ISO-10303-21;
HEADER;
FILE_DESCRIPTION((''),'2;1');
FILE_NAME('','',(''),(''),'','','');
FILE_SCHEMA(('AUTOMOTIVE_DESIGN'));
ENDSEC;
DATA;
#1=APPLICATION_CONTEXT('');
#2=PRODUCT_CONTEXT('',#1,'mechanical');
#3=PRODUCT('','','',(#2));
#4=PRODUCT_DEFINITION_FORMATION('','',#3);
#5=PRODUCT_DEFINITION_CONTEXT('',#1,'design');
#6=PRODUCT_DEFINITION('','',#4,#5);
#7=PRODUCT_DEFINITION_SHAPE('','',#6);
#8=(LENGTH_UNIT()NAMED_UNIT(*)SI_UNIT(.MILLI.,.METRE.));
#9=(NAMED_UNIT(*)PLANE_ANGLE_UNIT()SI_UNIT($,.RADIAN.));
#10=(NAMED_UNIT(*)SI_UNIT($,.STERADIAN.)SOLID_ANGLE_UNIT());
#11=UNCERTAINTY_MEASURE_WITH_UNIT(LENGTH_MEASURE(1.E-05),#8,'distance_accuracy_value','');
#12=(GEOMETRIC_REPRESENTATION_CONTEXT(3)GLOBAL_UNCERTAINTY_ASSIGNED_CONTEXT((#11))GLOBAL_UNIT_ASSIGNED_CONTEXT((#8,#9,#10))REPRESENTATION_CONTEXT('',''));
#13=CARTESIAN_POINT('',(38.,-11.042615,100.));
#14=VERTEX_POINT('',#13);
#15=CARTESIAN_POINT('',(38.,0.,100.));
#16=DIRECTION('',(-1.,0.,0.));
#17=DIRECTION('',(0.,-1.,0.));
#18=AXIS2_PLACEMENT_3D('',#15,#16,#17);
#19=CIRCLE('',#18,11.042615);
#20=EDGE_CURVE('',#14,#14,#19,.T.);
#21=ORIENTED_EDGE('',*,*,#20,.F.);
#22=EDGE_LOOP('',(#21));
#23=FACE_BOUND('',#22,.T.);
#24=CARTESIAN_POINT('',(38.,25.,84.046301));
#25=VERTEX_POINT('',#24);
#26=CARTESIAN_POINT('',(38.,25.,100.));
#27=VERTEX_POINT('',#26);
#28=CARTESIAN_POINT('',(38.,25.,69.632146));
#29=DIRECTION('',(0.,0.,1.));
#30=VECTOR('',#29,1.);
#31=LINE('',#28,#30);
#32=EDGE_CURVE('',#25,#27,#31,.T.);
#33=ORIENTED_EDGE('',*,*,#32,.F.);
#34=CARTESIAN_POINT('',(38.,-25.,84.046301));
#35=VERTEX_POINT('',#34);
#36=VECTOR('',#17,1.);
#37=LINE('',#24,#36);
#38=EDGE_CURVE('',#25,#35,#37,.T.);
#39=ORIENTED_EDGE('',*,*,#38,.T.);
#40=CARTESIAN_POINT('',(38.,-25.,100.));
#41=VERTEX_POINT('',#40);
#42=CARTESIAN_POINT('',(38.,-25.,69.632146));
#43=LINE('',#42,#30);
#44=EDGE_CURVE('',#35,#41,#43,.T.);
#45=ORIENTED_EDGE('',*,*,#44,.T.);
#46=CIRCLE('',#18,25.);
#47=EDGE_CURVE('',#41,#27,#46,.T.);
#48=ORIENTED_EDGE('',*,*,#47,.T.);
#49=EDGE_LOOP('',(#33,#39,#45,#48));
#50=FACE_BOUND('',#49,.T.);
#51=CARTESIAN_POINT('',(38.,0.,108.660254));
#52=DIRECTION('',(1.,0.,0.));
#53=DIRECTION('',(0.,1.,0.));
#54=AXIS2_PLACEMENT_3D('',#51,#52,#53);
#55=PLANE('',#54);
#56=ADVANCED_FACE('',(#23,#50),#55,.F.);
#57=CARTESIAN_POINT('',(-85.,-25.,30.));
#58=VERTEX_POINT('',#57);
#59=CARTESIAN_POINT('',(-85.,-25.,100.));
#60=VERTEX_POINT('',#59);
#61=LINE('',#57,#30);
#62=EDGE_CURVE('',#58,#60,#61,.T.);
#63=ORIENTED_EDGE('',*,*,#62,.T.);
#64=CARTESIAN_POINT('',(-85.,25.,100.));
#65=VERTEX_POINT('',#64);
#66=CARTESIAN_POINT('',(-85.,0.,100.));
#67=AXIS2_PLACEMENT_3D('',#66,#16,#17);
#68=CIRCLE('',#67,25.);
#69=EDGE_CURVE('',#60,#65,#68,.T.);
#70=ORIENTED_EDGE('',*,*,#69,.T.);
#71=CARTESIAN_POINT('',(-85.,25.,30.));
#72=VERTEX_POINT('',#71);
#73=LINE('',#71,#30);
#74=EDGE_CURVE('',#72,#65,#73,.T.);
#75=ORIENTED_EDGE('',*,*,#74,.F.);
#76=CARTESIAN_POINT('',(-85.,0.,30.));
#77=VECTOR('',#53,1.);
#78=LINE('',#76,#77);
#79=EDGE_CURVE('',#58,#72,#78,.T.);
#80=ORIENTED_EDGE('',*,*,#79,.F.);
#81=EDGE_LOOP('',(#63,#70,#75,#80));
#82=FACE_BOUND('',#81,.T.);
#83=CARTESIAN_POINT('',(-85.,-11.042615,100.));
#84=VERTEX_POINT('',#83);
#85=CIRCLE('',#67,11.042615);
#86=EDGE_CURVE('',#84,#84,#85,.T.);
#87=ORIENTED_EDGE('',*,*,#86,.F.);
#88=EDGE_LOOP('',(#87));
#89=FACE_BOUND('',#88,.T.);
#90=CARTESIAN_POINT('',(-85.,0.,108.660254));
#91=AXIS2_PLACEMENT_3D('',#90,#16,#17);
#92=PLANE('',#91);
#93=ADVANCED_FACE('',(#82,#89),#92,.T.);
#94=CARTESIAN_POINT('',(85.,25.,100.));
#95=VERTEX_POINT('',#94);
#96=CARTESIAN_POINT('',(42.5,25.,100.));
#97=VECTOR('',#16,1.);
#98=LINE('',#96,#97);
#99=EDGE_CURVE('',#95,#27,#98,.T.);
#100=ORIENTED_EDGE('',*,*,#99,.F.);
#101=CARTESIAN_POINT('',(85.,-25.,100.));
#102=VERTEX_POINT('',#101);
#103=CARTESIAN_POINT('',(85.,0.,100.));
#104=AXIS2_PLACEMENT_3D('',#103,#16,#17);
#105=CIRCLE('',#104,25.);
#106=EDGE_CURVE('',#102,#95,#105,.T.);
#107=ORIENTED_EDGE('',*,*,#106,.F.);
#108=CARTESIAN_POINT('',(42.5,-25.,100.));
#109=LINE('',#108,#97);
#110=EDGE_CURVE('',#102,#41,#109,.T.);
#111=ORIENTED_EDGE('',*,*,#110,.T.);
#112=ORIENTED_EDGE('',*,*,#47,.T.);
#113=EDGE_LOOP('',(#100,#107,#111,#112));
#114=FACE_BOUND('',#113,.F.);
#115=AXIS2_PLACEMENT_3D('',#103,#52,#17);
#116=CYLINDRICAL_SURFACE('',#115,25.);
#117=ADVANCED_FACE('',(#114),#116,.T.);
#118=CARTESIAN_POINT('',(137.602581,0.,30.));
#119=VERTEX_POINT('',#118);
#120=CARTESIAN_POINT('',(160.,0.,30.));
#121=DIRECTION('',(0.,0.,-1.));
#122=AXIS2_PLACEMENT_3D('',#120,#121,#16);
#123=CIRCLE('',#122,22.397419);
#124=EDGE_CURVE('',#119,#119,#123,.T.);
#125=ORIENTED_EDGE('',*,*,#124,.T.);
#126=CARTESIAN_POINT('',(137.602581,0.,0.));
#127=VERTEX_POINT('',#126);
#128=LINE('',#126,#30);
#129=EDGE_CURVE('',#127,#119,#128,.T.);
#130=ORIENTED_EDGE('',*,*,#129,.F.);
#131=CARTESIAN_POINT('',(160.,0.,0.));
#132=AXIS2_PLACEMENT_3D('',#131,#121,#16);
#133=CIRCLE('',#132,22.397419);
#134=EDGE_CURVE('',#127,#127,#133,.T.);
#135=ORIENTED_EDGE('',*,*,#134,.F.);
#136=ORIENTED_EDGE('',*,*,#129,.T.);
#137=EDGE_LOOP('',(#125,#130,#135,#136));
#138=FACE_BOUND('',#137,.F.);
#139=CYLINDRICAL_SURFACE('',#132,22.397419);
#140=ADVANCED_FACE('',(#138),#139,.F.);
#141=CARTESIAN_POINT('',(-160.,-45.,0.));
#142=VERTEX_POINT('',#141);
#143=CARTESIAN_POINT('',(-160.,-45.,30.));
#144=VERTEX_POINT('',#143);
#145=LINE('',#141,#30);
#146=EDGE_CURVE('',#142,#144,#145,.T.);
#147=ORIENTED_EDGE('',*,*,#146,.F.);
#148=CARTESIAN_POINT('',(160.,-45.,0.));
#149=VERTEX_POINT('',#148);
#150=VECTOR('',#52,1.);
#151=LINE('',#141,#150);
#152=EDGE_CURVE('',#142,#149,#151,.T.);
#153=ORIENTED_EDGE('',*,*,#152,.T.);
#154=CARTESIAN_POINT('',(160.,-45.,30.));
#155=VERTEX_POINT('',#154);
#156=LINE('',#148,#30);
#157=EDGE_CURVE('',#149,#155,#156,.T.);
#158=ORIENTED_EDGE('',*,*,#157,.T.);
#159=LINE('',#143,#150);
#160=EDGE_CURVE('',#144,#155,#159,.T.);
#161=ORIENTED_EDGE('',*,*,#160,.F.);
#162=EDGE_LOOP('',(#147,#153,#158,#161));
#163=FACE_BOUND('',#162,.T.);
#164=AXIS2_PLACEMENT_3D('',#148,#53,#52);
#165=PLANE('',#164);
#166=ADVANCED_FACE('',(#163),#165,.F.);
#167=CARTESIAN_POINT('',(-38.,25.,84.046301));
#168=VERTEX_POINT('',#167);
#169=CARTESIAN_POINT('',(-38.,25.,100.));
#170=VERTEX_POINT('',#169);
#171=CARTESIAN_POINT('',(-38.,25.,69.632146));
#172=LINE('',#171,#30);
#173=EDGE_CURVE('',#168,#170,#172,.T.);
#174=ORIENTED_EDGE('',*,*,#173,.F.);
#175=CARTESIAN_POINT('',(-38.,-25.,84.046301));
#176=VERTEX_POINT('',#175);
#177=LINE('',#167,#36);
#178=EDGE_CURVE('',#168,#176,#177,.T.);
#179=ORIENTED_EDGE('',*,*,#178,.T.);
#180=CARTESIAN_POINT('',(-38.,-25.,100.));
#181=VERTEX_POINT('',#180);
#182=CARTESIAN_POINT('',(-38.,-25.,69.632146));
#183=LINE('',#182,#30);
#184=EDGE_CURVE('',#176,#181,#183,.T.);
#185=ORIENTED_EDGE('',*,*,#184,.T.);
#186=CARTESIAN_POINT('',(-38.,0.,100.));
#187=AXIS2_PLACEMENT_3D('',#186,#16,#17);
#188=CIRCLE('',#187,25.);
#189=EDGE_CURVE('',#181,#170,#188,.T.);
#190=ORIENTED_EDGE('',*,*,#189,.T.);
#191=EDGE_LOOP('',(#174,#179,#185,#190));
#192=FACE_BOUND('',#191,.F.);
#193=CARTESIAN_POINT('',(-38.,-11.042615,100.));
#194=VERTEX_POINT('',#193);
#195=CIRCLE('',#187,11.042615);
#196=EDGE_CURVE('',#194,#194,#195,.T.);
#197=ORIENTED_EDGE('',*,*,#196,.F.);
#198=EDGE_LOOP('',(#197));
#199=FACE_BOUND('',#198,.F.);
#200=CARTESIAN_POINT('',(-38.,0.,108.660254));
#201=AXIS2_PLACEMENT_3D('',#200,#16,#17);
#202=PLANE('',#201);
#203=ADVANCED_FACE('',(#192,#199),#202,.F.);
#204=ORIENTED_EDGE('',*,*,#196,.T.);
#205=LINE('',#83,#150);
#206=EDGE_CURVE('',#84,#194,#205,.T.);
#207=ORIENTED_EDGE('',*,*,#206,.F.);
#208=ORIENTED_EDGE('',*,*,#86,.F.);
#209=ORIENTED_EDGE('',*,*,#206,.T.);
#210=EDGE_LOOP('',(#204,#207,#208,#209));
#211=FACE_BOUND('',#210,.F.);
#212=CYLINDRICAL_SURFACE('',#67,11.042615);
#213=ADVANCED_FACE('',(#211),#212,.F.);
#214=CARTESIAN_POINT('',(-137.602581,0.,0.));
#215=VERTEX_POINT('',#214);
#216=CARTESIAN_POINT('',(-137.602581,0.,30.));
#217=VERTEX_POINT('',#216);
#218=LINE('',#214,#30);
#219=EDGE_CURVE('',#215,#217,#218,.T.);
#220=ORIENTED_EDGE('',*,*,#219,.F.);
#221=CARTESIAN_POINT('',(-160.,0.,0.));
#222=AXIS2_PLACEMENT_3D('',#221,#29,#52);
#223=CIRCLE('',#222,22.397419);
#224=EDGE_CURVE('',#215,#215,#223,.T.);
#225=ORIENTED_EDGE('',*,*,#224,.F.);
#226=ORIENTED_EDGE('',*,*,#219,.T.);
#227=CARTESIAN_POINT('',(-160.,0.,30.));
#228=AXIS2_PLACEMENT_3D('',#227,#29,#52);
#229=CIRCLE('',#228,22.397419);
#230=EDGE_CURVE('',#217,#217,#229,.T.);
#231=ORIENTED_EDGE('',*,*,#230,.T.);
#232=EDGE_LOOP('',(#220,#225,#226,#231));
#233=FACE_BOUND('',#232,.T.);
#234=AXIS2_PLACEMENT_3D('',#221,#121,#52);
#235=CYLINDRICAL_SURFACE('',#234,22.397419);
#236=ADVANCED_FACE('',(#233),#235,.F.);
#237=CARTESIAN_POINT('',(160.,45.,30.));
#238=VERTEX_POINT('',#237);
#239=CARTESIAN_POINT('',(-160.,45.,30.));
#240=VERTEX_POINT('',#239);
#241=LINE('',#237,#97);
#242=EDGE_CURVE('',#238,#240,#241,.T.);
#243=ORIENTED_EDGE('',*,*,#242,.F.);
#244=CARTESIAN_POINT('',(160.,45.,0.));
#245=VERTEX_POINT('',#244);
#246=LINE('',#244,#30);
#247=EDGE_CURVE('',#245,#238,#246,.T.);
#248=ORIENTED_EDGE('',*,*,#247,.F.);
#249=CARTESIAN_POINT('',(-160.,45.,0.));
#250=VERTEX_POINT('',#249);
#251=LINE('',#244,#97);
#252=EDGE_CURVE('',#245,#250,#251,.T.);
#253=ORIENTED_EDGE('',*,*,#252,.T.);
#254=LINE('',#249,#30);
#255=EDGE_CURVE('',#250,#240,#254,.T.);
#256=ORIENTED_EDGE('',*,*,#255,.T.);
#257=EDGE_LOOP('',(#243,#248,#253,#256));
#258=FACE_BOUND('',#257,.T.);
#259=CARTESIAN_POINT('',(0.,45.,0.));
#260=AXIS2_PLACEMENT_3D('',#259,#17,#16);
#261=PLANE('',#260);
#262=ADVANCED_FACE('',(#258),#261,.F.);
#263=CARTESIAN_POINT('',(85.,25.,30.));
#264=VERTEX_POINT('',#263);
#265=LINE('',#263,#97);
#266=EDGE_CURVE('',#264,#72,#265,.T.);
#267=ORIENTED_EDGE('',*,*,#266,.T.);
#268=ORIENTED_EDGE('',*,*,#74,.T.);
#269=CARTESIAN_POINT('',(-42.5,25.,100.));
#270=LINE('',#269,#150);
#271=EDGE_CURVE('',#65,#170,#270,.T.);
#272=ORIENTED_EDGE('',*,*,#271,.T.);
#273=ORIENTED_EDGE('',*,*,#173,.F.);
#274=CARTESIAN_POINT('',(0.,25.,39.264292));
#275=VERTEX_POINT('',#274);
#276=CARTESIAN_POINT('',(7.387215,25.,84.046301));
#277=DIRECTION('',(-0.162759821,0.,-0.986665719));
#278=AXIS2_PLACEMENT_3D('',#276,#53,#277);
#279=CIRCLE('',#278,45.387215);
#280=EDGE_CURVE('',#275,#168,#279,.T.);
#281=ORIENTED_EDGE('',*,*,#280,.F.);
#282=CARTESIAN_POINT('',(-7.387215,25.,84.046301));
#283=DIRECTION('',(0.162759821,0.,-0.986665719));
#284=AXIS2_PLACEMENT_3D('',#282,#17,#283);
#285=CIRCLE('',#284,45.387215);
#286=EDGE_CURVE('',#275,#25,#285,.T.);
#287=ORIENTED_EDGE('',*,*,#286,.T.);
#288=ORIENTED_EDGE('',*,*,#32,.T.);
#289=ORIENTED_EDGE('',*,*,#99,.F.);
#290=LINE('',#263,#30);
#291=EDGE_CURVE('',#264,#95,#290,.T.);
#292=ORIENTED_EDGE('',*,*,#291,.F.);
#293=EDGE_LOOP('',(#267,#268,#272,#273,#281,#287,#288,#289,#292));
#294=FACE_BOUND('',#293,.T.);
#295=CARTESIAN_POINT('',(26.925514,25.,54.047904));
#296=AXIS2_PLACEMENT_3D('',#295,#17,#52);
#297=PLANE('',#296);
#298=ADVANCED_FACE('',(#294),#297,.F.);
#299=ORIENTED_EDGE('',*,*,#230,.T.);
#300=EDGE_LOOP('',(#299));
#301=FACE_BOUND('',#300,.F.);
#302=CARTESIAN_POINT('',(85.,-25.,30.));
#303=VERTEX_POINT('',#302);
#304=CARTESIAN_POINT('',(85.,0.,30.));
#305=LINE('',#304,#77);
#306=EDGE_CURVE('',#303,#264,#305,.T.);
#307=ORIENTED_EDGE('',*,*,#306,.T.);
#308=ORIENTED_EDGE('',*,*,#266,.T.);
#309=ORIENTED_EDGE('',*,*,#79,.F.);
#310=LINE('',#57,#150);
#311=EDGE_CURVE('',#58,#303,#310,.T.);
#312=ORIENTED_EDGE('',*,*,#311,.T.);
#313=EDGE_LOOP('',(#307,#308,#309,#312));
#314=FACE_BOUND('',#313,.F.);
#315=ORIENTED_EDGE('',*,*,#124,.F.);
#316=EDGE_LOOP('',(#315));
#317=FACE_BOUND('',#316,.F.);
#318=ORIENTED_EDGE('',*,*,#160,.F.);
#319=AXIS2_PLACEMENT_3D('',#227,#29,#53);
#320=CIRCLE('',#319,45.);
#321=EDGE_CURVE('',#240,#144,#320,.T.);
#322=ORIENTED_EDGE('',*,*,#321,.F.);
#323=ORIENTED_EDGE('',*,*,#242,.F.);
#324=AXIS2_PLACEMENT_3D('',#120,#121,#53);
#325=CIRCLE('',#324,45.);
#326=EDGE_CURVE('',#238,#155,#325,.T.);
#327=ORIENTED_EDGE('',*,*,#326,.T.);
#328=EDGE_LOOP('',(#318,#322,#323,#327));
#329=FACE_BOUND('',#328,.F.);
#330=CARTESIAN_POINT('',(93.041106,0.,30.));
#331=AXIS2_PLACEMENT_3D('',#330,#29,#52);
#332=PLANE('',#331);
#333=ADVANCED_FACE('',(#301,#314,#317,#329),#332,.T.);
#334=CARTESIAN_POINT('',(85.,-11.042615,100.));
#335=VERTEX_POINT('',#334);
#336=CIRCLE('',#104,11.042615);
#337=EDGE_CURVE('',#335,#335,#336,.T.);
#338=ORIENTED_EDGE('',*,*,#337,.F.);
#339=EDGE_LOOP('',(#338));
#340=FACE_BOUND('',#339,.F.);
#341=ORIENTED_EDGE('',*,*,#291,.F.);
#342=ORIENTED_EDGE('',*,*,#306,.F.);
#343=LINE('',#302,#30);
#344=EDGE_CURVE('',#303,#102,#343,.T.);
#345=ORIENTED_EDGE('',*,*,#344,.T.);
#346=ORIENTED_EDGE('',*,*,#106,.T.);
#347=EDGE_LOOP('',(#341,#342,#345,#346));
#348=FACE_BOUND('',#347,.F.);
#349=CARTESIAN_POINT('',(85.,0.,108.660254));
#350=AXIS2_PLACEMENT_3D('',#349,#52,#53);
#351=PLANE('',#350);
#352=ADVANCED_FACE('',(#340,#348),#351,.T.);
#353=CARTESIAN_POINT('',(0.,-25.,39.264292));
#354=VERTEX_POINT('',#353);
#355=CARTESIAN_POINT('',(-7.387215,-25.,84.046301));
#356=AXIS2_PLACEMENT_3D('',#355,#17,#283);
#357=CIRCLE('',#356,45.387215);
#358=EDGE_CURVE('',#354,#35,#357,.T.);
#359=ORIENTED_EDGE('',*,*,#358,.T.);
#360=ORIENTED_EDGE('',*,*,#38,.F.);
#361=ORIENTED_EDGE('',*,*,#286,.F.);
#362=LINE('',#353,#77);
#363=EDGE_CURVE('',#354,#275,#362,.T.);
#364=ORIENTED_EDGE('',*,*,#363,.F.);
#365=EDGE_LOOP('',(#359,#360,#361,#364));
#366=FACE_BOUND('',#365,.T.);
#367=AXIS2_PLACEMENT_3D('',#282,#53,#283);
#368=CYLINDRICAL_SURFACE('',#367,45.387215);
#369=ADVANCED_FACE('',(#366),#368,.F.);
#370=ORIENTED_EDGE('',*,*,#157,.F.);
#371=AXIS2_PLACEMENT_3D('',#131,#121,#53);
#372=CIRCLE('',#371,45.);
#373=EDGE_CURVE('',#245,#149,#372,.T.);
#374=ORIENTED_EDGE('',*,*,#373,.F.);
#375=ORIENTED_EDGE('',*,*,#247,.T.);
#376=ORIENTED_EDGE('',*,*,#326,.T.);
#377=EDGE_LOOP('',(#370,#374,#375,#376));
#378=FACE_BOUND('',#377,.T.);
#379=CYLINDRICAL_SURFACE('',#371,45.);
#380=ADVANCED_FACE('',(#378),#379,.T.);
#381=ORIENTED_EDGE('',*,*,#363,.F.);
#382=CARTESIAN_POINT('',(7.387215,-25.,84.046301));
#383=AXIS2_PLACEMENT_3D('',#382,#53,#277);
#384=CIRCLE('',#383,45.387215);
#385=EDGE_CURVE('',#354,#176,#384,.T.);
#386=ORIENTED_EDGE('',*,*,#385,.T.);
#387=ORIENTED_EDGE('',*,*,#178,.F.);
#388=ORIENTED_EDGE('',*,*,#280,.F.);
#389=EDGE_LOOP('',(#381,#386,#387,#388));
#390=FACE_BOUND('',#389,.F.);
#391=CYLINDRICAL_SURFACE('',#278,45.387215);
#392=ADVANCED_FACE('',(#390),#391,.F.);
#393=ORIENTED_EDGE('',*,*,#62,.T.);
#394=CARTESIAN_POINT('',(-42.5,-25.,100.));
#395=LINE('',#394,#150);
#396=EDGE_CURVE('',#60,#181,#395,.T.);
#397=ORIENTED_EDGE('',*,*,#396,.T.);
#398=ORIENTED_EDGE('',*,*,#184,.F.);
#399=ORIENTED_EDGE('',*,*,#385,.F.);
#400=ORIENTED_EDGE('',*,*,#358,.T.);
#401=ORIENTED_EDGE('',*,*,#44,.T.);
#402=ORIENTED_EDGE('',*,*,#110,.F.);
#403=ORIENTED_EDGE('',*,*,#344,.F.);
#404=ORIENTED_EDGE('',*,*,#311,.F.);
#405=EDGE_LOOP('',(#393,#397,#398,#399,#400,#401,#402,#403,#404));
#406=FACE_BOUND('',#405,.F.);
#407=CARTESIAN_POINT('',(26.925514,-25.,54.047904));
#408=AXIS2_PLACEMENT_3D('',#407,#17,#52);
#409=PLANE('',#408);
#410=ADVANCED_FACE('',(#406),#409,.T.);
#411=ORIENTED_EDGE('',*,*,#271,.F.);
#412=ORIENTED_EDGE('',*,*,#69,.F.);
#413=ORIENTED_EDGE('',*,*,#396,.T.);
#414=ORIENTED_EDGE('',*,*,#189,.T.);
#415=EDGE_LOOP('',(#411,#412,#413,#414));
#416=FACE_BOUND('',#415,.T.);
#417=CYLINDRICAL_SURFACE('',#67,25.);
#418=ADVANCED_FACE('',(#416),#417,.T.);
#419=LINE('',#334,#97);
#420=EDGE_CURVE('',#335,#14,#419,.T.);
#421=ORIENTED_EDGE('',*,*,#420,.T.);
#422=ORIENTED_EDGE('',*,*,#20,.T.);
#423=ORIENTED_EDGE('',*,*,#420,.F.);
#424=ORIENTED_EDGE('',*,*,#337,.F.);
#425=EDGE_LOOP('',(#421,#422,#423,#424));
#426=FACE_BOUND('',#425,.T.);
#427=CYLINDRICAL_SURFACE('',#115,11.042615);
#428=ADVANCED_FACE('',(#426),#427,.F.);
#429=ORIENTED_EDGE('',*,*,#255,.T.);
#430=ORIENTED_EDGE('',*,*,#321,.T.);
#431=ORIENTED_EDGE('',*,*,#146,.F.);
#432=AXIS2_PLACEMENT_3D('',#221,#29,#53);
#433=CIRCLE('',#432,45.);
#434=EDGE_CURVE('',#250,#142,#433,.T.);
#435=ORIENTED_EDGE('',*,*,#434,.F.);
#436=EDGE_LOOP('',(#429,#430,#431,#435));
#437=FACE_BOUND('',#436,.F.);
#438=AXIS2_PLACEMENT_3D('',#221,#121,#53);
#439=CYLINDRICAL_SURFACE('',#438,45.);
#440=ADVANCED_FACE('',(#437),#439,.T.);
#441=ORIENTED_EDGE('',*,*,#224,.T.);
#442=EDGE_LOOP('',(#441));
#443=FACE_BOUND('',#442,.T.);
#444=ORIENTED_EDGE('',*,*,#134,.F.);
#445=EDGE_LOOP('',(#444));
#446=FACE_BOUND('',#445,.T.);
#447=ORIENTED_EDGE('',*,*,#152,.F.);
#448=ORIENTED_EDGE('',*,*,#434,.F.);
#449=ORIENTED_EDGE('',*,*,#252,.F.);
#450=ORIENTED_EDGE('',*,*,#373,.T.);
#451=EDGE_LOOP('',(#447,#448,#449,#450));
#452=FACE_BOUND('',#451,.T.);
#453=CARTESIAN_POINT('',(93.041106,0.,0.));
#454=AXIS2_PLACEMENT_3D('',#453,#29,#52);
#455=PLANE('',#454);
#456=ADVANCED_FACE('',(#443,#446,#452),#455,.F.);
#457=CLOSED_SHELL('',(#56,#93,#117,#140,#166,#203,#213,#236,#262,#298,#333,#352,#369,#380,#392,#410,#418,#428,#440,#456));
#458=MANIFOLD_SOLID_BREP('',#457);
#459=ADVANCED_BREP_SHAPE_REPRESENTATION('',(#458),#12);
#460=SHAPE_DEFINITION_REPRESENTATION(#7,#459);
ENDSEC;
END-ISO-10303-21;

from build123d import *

# Parameters (mm, degrees)
F0_R        = 22.3974192725
F1_DEPTH    = 30
F2_W        = 85
F2_H        = 50
F3_DEPTH    = 70
F4_W        = 38
F4_H        = 60.7357084751
F5_DEPTH    = 50
F6_T1_DEPTH = 50
F8_DEPTH    = 47
F9_R        = 11.0426148683
F10_DEPTH   = 47


# Not quite as in the source:
# - a fillet or chamfer that OpenCascade refuses, or shapes differently, is made with other operations: its cross-section is extruded or revolved along the edge and cut away or added


with BuildPart() as f1:
    # F0 (on Top) → F1 (new body)
    with BuildSketch(Plane.XY):
        with BuildLine():
            Line((0, 0), (0, 45))
            Line((0, 45), (-160, 45))
            ThreePointArc((-160, 45), (-205, 0), (-160, -45))
            Line((-160, -45), (0, -45))
            Line((0, -45), (0, 0))
        make_face()
        with Locations((-160, 0)):
            Circle(F0_R, mode=Mode.SUBTRACT)
    extrude(amount=F1_DEPTH)

    # F2 (on face) → F3 (join)
    with BuildSketch(Plane.XY.offset(30)):
        with Locations((-42.5, 0)):
            Rectangle(F2_W, F2_H)
    extrude(amount=F3_DEPTH)

    # F4 (on face) → F5 (cut)
    with BuildSketch(Plane.XZ.offset(25)):
        with Locations((-19, 69.6321457624)):
            Rectangle(F4_W, F4_H)
    extrude(amount=-F5_DEPTH, mode=Mode.SUBTRACT)

    # F6: fillet of radius 45.3872149726 on 1 edges, made by hand

    # F6_s2 → F6_t1 (join)
    with BuildSketch(Plane.XZ.offset(-25)):
        with BuildLine():
            ThreePointArc((0, 39.2642915249), (-27.2197525121, 54.6803835575), (-38, 84.0463006125))
            Line((-38, 84.0463006125), (-38, 39.2642915249))
            Line((-38, 39.2642915249), (0, 39.2642915249))
        make_face()
    extrude(amount=F6_T1_DEPTH)

    # F7 (on face) → F8 (join)
    with BuildSketch(Plane(origin=(-85, 0, 0), x_dir=(0, -1, 0), z_dir=(-1, 0, 0))):
        with BuildLine():
            Line((-25, 100), (25, 100))
            ThreePointArc((25, 100), (0, 125), (-25, 100))
        make_face()
    extrude(amount=-F8_DEPTH)

    # F9 (on face) → F10 (cut)
    with BuildSketch(Plane(origin=(-85, 0, 0), x_dir=(0, -1, 0), z_dir=(-1, 0, 0))):
        with Locations((0, 100)):
            Circle(F9_R)
    extrude(amount=-F10_DEPTH, mode=Mode.SUBTRACT)

    # F11: F1 across face


with BuildPart() as f1_1:
    add(f1.part)
    add(f1.part.mirror(Plane(origin=(0, 0, 17.8748906724), x_dir=(0, 1, 0), z_dir=(1, 0, 0))))


solid = f1_1.part
